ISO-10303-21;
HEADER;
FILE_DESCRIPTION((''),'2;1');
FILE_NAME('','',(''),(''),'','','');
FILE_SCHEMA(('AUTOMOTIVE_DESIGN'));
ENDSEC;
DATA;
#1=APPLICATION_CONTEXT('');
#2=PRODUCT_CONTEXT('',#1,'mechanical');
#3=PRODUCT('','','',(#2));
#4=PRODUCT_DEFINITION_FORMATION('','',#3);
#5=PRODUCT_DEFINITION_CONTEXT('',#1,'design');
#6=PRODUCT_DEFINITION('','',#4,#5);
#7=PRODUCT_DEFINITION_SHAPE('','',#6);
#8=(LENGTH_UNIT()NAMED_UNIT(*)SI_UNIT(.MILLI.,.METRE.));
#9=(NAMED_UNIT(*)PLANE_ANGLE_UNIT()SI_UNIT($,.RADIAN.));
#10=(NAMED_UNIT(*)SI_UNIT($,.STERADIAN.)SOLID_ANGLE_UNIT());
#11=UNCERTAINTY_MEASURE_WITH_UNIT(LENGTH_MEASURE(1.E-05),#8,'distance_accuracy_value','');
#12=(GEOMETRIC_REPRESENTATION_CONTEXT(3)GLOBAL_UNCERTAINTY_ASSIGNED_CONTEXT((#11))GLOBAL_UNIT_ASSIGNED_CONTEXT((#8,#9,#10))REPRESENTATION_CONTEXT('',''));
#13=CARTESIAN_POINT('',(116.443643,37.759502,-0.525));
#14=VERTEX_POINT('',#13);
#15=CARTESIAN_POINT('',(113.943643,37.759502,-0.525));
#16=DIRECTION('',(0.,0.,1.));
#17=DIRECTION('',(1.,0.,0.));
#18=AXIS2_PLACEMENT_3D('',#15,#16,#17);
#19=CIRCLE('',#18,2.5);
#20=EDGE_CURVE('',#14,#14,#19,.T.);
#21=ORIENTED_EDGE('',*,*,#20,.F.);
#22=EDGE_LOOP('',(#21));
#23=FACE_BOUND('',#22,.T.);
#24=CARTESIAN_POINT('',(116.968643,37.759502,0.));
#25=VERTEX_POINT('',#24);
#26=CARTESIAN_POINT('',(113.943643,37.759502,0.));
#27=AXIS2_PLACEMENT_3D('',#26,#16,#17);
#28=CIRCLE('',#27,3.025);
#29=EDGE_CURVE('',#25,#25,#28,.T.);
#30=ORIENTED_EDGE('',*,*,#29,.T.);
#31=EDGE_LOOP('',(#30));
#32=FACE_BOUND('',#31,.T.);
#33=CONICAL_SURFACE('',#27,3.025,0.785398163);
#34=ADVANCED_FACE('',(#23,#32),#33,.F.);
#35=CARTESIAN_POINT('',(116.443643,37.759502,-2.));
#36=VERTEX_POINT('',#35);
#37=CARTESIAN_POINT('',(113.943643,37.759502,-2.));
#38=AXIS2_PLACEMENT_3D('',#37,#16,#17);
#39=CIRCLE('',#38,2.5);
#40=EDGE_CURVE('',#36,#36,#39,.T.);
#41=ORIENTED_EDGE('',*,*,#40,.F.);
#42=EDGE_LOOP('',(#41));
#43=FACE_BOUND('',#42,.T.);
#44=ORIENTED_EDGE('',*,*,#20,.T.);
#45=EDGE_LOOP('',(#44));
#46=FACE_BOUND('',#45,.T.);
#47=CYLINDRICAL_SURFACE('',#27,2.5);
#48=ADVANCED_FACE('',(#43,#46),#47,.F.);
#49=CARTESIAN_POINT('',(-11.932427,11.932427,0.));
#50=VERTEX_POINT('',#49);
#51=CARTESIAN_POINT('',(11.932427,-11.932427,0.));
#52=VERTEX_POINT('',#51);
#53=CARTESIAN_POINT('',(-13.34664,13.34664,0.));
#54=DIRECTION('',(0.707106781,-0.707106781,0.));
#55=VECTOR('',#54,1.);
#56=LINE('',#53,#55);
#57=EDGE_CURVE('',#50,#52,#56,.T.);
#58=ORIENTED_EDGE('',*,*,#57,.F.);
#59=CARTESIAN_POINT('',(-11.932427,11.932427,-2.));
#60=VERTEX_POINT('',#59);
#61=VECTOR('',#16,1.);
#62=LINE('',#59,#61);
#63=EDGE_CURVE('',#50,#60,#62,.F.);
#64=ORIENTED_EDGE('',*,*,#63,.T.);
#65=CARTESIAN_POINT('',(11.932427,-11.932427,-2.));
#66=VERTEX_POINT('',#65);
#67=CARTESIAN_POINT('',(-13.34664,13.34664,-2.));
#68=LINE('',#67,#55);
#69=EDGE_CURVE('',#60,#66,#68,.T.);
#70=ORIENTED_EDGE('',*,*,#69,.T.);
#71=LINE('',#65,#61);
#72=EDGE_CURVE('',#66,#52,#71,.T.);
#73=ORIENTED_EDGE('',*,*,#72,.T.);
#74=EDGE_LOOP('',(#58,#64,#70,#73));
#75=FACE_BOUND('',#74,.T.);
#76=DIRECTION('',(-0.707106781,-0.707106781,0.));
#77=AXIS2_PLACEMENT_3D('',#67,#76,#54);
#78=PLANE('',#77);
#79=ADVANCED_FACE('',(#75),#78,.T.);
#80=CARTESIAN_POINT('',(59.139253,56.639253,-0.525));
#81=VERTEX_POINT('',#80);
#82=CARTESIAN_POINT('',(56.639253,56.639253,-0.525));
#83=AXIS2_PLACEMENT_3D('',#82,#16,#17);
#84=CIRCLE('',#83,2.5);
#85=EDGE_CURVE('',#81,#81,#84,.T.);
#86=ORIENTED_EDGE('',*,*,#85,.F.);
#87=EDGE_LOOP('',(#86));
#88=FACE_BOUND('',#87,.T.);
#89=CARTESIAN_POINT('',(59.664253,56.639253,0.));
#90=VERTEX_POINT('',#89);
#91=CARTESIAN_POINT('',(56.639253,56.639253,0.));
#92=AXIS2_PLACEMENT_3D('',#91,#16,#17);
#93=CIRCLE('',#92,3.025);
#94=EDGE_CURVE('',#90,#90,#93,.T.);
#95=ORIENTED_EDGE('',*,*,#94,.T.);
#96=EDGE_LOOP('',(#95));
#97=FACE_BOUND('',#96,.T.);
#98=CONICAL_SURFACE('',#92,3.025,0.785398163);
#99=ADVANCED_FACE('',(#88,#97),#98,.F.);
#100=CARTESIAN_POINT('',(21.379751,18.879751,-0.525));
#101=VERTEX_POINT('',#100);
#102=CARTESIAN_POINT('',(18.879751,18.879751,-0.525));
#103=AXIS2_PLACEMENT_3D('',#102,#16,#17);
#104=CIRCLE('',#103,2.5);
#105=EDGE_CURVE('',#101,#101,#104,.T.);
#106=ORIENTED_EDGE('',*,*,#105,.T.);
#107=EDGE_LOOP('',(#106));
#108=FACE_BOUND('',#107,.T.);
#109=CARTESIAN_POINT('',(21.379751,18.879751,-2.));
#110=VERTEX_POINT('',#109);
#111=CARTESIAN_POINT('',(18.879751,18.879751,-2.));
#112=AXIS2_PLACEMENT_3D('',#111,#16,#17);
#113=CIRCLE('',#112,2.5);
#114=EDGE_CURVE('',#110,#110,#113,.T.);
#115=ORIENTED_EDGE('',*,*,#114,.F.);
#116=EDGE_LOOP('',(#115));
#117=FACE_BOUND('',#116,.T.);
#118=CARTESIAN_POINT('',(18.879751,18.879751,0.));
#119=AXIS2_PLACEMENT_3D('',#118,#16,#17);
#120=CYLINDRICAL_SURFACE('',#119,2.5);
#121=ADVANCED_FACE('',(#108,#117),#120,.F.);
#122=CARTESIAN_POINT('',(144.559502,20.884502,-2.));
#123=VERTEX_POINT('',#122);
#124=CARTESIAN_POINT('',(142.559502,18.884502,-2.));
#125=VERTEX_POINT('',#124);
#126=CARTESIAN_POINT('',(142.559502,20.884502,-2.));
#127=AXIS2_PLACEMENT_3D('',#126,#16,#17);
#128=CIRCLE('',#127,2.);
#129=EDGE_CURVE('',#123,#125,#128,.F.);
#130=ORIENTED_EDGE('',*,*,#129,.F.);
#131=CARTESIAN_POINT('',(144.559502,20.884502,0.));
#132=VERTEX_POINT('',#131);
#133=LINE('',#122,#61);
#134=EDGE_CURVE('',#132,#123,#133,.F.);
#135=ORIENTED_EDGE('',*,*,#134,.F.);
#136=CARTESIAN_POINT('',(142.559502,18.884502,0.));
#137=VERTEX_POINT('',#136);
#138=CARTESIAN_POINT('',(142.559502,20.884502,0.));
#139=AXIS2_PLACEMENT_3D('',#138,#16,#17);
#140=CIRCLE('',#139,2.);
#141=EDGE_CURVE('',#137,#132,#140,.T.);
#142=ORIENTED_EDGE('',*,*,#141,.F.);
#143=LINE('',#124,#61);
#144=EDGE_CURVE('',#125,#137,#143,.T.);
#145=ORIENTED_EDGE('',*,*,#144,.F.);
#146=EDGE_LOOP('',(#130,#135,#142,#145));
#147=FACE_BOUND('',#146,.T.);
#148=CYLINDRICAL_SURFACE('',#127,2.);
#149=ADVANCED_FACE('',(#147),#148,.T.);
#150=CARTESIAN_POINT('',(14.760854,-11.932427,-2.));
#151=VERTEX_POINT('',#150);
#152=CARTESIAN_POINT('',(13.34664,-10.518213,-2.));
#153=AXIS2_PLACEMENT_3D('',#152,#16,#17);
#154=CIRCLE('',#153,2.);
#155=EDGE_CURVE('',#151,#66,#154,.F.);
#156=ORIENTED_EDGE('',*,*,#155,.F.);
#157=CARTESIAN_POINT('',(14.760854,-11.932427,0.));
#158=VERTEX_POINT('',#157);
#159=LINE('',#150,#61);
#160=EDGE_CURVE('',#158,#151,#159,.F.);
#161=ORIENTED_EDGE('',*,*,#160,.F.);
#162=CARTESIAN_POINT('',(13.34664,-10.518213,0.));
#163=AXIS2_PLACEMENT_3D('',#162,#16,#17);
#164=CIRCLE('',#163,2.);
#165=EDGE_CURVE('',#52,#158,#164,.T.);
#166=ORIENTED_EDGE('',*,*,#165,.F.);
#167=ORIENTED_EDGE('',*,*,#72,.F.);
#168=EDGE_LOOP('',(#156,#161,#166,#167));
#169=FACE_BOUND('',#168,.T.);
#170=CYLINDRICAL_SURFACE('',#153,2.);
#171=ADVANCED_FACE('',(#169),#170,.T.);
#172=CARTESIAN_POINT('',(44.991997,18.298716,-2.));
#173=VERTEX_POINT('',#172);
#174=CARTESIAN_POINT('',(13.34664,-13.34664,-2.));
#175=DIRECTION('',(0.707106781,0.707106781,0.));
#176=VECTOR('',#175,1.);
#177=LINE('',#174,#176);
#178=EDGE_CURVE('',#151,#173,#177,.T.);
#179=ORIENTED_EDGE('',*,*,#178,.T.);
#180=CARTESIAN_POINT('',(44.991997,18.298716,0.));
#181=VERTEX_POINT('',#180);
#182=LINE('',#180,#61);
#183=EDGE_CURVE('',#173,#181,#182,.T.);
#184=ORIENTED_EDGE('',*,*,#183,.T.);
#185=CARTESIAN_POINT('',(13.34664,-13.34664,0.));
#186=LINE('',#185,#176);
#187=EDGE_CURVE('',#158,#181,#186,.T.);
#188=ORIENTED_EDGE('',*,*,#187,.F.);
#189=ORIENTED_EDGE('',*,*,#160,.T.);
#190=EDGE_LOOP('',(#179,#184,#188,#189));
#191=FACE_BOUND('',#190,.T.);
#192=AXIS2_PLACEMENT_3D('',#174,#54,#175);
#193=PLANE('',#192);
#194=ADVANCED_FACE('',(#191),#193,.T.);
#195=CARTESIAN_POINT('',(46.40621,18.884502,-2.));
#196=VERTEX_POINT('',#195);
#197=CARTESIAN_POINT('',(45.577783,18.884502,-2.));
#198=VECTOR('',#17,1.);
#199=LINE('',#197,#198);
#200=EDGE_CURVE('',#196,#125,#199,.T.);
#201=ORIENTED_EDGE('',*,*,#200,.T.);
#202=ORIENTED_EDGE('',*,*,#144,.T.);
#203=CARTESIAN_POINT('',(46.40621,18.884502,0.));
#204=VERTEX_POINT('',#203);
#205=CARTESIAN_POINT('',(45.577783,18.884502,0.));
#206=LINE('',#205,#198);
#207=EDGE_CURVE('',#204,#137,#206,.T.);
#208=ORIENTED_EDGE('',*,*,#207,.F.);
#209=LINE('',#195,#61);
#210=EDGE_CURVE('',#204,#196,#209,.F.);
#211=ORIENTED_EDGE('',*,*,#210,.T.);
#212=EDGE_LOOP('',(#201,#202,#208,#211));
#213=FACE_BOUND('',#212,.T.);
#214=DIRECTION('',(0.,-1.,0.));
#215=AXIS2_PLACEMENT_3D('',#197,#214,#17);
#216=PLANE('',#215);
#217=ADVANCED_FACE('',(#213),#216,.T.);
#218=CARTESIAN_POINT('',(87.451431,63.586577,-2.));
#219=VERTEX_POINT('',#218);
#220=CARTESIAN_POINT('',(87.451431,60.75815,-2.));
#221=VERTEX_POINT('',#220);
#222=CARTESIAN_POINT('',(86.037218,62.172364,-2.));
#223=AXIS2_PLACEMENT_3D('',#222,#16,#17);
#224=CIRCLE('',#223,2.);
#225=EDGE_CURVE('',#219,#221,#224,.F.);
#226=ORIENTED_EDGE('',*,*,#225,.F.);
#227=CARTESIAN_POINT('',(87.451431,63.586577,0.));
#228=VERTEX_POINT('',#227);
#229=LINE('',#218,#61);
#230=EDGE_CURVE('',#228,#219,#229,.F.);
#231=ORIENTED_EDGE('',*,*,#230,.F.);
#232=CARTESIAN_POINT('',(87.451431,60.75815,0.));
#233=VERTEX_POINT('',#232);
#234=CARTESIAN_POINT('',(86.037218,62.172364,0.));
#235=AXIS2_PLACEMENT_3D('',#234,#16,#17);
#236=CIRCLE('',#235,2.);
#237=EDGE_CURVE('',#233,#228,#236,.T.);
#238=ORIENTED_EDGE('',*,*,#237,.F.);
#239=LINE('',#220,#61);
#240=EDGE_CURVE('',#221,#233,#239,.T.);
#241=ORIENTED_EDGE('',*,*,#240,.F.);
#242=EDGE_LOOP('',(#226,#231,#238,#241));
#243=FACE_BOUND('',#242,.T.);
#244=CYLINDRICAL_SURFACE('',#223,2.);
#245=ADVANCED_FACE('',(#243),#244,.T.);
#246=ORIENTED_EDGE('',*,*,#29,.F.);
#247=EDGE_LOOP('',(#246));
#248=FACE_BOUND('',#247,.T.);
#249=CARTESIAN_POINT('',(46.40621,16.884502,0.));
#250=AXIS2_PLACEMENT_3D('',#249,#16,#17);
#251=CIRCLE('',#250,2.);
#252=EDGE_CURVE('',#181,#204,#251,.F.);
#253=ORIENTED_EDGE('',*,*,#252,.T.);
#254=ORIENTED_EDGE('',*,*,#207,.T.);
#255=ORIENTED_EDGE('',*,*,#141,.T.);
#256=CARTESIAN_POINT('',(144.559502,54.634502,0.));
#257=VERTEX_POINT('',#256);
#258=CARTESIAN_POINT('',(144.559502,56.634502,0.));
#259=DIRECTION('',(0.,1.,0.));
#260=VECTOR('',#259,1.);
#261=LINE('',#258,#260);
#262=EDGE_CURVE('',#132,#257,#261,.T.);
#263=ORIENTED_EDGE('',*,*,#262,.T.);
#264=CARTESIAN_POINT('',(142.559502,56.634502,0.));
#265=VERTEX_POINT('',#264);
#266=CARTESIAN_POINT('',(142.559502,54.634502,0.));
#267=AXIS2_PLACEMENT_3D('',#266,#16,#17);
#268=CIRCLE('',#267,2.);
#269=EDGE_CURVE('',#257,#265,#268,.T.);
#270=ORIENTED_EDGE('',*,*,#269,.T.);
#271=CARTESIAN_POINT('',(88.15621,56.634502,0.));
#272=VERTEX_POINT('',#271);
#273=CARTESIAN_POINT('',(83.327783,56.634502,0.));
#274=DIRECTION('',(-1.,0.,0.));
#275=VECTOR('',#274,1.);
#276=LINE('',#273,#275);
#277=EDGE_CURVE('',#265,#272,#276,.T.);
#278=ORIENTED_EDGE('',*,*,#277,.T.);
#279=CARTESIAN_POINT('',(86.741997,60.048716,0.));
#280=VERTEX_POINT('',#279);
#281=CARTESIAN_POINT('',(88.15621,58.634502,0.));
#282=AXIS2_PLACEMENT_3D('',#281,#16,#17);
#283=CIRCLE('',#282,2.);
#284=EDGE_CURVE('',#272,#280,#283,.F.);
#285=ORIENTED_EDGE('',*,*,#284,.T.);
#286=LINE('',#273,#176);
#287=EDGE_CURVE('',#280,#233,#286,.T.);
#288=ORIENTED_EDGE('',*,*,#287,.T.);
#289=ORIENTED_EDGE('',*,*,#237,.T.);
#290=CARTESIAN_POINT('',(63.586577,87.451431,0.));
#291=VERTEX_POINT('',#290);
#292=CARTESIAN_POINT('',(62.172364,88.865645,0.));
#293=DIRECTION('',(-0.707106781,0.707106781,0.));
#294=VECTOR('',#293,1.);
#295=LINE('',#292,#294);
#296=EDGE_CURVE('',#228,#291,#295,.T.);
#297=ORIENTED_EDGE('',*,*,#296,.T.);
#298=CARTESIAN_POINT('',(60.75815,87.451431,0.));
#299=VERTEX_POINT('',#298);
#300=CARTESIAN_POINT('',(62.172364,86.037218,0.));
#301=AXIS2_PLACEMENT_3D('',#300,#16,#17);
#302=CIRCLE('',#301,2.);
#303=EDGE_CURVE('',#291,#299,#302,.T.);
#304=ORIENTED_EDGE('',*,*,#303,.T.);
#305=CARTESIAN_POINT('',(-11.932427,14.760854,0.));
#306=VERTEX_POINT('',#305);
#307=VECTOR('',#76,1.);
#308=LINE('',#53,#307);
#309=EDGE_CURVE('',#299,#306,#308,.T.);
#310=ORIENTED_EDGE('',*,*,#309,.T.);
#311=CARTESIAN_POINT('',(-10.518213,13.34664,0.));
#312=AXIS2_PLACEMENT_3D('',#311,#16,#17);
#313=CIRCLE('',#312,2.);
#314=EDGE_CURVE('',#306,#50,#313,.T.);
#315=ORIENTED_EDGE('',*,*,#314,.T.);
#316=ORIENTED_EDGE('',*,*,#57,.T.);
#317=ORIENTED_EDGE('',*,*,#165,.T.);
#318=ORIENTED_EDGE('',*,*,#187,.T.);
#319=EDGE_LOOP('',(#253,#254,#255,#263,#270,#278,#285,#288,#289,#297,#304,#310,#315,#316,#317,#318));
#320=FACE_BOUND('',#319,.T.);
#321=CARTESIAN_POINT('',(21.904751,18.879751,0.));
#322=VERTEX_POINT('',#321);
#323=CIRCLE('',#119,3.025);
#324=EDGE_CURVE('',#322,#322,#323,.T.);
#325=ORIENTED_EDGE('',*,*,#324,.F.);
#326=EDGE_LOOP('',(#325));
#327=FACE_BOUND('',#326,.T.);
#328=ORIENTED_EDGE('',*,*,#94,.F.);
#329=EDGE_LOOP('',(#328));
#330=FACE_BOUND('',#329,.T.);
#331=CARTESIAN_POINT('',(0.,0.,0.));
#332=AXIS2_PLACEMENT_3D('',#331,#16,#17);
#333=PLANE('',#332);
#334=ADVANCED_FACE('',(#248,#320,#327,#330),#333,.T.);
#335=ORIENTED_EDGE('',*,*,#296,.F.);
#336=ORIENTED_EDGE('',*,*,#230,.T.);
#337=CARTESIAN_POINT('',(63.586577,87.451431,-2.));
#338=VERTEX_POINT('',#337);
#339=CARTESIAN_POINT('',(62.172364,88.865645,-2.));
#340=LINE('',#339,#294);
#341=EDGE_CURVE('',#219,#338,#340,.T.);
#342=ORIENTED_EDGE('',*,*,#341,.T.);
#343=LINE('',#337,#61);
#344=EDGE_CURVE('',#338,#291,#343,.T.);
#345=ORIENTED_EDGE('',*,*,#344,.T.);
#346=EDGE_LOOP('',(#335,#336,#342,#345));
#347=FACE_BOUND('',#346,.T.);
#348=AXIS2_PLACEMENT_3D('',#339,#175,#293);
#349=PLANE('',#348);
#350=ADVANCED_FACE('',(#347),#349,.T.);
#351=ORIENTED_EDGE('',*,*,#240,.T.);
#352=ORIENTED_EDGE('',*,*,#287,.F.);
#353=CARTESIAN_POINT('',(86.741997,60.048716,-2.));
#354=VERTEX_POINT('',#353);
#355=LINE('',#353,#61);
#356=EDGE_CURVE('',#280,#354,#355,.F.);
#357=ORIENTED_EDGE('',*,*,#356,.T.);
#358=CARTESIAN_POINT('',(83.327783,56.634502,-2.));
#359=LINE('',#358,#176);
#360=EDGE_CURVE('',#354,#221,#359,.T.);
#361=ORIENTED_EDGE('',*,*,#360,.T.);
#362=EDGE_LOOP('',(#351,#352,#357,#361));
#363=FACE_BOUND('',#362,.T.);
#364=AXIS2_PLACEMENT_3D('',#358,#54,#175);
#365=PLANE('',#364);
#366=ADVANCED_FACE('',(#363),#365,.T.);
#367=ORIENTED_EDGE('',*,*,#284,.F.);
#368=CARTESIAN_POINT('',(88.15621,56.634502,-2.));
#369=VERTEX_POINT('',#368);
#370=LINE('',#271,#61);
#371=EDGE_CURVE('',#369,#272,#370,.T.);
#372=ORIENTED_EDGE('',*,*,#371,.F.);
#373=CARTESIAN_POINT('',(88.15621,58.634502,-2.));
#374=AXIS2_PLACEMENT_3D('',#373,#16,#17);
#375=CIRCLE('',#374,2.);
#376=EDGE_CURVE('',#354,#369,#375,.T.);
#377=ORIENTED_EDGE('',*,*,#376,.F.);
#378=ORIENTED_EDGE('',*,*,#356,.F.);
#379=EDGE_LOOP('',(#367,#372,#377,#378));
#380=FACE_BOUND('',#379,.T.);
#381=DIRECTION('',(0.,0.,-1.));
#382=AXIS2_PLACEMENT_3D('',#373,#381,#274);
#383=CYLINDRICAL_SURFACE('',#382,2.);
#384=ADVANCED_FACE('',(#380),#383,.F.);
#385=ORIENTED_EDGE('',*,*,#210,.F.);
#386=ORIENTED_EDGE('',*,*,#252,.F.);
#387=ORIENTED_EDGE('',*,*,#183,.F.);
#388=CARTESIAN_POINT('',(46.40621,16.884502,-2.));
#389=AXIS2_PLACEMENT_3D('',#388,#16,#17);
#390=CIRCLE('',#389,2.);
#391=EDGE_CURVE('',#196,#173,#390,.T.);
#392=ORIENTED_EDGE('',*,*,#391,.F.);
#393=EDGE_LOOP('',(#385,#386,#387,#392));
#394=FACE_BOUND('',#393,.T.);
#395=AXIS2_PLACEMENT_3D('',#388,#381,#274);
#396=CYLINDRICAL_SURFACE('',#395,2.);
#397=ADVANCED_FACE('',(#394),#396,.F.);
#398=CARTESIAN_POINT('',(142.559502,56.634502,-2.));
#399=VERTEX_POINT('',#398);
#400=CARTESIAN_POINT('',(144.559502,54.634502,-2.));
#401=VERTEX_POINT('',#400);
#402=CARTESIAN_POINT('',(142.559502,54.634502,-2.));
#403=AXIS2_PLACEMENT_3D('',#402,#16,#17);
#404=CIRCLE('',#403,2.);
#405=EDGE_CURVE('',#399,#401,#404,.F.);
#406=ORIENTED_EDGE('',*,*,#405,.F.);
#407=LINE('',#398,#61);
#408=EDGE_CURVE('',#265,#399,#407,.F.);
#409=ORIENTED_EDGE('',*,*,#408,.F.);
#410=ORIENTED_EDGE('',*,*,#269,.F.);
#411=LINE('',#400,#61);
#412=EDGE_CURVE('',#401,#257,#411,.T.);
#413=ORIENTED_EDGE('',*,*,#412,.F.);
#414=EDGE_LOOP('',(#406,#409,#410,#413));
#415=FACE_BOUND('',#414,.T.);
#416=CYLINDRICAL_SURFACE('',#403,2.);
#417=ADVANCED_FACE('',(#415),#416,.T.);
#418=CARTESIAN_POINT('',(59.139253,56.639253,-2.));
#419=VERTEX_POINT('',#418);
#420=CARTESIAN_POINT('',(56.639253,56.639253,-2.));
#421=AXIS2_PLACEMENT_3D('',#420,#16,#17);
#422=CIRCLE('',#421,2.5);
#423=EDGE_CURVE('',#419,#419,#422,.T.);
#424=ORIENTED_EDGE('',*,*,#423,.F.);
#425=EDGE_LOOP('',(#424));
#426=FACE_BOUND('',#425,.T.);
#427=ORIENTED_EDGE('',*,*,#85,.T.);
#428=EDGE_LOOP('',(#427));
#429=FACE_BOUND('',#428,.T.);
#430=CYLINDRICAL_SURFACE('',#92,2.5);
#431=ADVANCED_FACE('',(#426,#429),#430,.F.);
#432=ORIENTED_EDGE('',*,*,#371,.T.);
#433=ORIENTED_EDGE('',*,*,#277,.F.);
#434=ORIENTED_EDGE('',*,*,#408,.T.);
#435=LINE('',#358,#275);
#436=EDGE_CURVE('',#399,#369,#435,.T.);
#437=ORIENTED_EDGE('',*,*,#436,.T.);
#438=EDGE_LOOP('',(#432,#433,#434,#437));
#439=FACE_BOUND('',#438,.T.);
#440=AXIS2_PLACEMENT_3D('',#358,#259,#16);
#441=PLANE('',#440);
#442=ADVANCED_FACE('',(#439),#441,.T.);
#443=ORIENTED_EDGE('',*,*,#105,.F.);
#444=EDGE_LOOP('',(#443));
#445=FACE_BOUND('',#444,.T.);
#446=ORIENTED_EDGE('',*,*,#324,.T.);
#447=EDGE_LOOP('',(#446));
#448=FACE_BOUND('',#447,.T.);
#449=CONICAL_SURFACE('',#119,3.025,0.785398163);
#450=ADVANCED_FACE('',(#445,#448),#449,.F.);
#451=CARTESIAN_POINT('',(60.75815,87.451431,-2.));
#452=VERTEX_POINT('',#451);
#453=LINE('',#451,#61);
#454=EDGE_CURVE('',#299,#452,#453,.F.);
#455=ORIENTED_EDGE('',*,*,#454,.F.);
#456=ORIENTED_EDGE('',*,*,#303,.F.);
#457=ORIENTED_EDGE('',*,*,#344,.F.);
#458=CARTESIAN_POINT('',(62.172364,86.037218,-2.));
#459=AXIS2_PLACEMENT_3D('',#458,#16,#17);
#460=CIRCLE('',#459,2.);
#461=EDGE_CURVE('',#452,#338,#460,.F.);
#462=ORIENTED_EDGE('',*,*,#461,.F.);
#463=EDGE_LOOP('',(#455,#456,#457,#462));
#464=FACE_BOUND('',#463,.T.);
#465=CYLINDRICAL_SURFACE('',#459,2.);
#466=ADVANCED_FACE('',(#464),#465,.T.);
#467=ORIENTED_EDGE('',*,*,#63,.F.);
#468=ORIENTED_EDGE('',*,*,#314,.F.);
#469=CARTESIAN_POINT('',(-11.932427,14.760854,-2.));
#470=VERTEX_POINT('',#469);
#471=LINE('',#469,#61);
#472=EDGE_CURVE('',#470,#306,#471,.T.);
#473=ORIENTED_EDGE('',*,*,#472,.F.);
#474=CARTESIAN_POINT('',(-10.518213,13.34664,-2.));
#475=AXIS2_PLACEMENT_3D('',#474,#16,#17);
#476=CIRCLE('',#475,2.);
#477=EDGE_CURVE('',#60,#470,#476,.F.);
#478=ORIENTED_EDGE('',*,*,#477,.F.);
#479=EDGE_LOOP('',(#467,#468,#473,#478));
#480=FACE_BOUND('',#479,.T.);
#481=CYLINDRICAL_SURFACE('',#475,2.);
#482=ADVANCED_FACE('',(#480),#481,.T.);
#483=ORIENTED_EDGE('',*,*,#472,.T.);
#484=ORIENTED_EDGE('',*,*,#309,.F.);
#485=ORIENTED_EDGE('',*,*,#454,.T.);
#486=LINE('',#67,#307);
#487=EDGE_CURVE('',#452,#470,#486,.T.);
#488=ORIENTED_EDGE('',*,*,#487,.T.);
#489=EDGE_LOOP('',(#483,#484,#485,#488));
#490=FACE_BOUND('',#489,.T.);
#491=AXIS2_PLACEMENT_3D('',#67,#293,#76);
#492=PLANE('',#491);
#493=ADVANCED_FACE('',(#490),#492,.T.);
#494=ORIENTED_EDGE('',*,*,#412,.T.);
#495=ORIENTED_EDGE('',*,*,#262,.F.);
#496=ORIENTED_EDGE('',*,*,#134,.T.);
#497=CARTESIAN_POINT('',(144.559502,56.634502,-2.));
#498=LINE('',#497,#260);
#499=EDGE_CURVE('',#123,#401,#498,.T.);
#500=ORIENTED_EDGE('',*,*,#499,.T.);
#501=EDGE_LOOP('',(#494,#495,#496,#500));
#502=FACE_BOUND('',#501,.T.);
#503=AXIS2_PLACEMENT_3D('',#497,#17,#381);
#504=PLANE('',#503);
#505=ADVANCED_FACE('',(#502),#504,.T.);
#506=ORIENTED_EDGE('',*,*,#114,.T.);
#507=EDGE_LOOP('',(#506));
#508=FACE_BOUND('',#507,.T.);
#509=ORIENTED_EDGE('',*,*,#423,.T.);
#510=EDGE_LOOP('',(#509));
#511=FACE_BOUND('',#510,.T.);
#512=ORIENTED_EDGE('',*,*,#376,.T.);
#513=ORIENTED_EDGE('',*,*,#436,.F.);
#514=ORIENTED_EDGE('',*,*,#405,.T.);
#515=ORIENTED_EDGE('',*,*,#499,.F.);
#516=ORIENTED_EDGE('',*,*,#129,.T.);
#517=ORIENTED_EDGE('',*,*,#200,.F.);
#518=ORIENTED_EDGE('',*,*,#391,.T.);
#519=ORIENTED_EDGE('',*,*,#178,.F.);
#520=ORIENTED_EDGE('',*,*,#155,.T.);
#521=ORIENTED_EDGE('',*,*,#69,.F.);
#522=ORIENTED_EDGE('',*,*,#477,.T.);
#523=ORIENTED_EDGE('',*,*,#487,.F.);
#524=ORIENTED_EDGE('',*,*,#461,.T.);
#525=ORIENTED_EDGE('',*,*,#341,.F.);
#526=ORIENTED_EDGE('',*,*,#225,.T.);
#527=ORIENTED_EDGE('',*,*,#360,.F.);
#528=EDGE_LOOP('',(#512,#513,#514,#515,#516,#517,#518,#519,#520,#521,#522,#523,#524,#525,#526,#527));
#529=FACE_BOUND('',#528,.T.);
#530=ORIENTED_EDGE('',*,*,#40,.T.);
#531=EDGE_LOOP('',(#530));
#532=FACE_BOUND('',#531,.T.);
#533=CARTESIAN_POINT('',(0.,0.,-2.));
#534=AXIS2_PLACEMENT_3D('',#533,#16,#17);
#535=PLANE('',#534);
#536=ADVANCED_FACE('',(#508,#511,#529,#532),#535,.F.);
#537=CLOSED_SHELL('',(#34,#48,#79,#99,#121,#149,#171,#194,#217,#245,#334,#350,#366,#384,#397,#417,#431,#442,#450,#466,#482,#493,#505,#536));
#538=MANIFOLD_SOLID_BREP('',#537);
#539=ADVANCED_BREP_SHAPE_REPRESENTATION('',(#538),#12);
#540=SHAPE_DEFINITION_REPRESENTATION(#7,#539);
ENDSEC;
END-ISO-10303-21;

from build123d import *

# Parameters (mm, degrees)
BASE_FLANGE1_DEPTH              = 2
M6X1_0_TAPPED_HOLE1_D           = 5
M6X1_0_TAPPED_HOLE1_DEPTH       = 15
M6X1_0_TAPPED_HOLE1_CSINK_D     = 6.05
M6X1_0_TAPPED_HOLE1_CSINK_ANGLE = 90
M6X1_0_TAPPED_HOLE1_TIP         = 1.502151548
FILLET1_R                       = 2


# Sheet-metal steps are written as plain solids
with BuildPart() as part:
    # Sketch1 → Base-Flange1 (new body)
    with BuildSketch(Plane.XY):
        Polygon((13.346640495, -13.346640495), (45.577783105, 18.884502115), (144.559502115, 18.884502115), (144.559502115, 56.634502115), (83.327783105, 56.634502115), (88.865644726, 62.172363736), (62.172363736, 88.865644726), (-13.346640495, 13.346640495), align=None)
    extrude(amount=-BASE_FLANGE1_DEPTH)

    # M6x1.0 Tapped Hole1
    with Locations(Plane.XY):
        with Locations((56.639253173, 56.639253173), (18.879751058, 18.879751058), (113.94364261, 37.759502115)):
            CounterSinkHole(M6X1_0_TAPPED_HOLE1_D / 2, M6X1_0_TAPPED_HOLE1_CSINK_D / 2, depth=M6X1_0_TAPPED_HOLE1_DEPTH, counter_sink_angle=M6X1_0_TAPPED_HOLE1_CSINK_ANGLE)
            with Locations((0, 0, -(M6X1_0_TAPPED_HOLE1_DEPTH + M6X1_0_TAPPED_HOLE1_TIP / 2))):  # 118° drill point
                Cone(0, M6X1_0_TAPPED_HOLE1_D / 2, M6X1_0_TAPPED_HOLE1_TIP, mode=Mode.SUBTRACT)

    # Fillet1
    fillet1_edges = [part.edges().sort_by_distance(p)[0] for p in [
        (-13.346640495, 13.346640495, -1),
        (62.172363736, 88.865644726, -1),
        (88.865644726, 62.172363736, -1),
        (83.327783105, 56.634502115, -1),
        (144.559502115, 56.634502115, -1),
        (144.559502115, 18.884502115, -1),
        (45.577783105, 18.884502115, -1),
        (13.346640495, -13.346640495, -1),
    ]]
    fillet(fillet1_edges, radius=FILLET1_R)


solid = part.part
